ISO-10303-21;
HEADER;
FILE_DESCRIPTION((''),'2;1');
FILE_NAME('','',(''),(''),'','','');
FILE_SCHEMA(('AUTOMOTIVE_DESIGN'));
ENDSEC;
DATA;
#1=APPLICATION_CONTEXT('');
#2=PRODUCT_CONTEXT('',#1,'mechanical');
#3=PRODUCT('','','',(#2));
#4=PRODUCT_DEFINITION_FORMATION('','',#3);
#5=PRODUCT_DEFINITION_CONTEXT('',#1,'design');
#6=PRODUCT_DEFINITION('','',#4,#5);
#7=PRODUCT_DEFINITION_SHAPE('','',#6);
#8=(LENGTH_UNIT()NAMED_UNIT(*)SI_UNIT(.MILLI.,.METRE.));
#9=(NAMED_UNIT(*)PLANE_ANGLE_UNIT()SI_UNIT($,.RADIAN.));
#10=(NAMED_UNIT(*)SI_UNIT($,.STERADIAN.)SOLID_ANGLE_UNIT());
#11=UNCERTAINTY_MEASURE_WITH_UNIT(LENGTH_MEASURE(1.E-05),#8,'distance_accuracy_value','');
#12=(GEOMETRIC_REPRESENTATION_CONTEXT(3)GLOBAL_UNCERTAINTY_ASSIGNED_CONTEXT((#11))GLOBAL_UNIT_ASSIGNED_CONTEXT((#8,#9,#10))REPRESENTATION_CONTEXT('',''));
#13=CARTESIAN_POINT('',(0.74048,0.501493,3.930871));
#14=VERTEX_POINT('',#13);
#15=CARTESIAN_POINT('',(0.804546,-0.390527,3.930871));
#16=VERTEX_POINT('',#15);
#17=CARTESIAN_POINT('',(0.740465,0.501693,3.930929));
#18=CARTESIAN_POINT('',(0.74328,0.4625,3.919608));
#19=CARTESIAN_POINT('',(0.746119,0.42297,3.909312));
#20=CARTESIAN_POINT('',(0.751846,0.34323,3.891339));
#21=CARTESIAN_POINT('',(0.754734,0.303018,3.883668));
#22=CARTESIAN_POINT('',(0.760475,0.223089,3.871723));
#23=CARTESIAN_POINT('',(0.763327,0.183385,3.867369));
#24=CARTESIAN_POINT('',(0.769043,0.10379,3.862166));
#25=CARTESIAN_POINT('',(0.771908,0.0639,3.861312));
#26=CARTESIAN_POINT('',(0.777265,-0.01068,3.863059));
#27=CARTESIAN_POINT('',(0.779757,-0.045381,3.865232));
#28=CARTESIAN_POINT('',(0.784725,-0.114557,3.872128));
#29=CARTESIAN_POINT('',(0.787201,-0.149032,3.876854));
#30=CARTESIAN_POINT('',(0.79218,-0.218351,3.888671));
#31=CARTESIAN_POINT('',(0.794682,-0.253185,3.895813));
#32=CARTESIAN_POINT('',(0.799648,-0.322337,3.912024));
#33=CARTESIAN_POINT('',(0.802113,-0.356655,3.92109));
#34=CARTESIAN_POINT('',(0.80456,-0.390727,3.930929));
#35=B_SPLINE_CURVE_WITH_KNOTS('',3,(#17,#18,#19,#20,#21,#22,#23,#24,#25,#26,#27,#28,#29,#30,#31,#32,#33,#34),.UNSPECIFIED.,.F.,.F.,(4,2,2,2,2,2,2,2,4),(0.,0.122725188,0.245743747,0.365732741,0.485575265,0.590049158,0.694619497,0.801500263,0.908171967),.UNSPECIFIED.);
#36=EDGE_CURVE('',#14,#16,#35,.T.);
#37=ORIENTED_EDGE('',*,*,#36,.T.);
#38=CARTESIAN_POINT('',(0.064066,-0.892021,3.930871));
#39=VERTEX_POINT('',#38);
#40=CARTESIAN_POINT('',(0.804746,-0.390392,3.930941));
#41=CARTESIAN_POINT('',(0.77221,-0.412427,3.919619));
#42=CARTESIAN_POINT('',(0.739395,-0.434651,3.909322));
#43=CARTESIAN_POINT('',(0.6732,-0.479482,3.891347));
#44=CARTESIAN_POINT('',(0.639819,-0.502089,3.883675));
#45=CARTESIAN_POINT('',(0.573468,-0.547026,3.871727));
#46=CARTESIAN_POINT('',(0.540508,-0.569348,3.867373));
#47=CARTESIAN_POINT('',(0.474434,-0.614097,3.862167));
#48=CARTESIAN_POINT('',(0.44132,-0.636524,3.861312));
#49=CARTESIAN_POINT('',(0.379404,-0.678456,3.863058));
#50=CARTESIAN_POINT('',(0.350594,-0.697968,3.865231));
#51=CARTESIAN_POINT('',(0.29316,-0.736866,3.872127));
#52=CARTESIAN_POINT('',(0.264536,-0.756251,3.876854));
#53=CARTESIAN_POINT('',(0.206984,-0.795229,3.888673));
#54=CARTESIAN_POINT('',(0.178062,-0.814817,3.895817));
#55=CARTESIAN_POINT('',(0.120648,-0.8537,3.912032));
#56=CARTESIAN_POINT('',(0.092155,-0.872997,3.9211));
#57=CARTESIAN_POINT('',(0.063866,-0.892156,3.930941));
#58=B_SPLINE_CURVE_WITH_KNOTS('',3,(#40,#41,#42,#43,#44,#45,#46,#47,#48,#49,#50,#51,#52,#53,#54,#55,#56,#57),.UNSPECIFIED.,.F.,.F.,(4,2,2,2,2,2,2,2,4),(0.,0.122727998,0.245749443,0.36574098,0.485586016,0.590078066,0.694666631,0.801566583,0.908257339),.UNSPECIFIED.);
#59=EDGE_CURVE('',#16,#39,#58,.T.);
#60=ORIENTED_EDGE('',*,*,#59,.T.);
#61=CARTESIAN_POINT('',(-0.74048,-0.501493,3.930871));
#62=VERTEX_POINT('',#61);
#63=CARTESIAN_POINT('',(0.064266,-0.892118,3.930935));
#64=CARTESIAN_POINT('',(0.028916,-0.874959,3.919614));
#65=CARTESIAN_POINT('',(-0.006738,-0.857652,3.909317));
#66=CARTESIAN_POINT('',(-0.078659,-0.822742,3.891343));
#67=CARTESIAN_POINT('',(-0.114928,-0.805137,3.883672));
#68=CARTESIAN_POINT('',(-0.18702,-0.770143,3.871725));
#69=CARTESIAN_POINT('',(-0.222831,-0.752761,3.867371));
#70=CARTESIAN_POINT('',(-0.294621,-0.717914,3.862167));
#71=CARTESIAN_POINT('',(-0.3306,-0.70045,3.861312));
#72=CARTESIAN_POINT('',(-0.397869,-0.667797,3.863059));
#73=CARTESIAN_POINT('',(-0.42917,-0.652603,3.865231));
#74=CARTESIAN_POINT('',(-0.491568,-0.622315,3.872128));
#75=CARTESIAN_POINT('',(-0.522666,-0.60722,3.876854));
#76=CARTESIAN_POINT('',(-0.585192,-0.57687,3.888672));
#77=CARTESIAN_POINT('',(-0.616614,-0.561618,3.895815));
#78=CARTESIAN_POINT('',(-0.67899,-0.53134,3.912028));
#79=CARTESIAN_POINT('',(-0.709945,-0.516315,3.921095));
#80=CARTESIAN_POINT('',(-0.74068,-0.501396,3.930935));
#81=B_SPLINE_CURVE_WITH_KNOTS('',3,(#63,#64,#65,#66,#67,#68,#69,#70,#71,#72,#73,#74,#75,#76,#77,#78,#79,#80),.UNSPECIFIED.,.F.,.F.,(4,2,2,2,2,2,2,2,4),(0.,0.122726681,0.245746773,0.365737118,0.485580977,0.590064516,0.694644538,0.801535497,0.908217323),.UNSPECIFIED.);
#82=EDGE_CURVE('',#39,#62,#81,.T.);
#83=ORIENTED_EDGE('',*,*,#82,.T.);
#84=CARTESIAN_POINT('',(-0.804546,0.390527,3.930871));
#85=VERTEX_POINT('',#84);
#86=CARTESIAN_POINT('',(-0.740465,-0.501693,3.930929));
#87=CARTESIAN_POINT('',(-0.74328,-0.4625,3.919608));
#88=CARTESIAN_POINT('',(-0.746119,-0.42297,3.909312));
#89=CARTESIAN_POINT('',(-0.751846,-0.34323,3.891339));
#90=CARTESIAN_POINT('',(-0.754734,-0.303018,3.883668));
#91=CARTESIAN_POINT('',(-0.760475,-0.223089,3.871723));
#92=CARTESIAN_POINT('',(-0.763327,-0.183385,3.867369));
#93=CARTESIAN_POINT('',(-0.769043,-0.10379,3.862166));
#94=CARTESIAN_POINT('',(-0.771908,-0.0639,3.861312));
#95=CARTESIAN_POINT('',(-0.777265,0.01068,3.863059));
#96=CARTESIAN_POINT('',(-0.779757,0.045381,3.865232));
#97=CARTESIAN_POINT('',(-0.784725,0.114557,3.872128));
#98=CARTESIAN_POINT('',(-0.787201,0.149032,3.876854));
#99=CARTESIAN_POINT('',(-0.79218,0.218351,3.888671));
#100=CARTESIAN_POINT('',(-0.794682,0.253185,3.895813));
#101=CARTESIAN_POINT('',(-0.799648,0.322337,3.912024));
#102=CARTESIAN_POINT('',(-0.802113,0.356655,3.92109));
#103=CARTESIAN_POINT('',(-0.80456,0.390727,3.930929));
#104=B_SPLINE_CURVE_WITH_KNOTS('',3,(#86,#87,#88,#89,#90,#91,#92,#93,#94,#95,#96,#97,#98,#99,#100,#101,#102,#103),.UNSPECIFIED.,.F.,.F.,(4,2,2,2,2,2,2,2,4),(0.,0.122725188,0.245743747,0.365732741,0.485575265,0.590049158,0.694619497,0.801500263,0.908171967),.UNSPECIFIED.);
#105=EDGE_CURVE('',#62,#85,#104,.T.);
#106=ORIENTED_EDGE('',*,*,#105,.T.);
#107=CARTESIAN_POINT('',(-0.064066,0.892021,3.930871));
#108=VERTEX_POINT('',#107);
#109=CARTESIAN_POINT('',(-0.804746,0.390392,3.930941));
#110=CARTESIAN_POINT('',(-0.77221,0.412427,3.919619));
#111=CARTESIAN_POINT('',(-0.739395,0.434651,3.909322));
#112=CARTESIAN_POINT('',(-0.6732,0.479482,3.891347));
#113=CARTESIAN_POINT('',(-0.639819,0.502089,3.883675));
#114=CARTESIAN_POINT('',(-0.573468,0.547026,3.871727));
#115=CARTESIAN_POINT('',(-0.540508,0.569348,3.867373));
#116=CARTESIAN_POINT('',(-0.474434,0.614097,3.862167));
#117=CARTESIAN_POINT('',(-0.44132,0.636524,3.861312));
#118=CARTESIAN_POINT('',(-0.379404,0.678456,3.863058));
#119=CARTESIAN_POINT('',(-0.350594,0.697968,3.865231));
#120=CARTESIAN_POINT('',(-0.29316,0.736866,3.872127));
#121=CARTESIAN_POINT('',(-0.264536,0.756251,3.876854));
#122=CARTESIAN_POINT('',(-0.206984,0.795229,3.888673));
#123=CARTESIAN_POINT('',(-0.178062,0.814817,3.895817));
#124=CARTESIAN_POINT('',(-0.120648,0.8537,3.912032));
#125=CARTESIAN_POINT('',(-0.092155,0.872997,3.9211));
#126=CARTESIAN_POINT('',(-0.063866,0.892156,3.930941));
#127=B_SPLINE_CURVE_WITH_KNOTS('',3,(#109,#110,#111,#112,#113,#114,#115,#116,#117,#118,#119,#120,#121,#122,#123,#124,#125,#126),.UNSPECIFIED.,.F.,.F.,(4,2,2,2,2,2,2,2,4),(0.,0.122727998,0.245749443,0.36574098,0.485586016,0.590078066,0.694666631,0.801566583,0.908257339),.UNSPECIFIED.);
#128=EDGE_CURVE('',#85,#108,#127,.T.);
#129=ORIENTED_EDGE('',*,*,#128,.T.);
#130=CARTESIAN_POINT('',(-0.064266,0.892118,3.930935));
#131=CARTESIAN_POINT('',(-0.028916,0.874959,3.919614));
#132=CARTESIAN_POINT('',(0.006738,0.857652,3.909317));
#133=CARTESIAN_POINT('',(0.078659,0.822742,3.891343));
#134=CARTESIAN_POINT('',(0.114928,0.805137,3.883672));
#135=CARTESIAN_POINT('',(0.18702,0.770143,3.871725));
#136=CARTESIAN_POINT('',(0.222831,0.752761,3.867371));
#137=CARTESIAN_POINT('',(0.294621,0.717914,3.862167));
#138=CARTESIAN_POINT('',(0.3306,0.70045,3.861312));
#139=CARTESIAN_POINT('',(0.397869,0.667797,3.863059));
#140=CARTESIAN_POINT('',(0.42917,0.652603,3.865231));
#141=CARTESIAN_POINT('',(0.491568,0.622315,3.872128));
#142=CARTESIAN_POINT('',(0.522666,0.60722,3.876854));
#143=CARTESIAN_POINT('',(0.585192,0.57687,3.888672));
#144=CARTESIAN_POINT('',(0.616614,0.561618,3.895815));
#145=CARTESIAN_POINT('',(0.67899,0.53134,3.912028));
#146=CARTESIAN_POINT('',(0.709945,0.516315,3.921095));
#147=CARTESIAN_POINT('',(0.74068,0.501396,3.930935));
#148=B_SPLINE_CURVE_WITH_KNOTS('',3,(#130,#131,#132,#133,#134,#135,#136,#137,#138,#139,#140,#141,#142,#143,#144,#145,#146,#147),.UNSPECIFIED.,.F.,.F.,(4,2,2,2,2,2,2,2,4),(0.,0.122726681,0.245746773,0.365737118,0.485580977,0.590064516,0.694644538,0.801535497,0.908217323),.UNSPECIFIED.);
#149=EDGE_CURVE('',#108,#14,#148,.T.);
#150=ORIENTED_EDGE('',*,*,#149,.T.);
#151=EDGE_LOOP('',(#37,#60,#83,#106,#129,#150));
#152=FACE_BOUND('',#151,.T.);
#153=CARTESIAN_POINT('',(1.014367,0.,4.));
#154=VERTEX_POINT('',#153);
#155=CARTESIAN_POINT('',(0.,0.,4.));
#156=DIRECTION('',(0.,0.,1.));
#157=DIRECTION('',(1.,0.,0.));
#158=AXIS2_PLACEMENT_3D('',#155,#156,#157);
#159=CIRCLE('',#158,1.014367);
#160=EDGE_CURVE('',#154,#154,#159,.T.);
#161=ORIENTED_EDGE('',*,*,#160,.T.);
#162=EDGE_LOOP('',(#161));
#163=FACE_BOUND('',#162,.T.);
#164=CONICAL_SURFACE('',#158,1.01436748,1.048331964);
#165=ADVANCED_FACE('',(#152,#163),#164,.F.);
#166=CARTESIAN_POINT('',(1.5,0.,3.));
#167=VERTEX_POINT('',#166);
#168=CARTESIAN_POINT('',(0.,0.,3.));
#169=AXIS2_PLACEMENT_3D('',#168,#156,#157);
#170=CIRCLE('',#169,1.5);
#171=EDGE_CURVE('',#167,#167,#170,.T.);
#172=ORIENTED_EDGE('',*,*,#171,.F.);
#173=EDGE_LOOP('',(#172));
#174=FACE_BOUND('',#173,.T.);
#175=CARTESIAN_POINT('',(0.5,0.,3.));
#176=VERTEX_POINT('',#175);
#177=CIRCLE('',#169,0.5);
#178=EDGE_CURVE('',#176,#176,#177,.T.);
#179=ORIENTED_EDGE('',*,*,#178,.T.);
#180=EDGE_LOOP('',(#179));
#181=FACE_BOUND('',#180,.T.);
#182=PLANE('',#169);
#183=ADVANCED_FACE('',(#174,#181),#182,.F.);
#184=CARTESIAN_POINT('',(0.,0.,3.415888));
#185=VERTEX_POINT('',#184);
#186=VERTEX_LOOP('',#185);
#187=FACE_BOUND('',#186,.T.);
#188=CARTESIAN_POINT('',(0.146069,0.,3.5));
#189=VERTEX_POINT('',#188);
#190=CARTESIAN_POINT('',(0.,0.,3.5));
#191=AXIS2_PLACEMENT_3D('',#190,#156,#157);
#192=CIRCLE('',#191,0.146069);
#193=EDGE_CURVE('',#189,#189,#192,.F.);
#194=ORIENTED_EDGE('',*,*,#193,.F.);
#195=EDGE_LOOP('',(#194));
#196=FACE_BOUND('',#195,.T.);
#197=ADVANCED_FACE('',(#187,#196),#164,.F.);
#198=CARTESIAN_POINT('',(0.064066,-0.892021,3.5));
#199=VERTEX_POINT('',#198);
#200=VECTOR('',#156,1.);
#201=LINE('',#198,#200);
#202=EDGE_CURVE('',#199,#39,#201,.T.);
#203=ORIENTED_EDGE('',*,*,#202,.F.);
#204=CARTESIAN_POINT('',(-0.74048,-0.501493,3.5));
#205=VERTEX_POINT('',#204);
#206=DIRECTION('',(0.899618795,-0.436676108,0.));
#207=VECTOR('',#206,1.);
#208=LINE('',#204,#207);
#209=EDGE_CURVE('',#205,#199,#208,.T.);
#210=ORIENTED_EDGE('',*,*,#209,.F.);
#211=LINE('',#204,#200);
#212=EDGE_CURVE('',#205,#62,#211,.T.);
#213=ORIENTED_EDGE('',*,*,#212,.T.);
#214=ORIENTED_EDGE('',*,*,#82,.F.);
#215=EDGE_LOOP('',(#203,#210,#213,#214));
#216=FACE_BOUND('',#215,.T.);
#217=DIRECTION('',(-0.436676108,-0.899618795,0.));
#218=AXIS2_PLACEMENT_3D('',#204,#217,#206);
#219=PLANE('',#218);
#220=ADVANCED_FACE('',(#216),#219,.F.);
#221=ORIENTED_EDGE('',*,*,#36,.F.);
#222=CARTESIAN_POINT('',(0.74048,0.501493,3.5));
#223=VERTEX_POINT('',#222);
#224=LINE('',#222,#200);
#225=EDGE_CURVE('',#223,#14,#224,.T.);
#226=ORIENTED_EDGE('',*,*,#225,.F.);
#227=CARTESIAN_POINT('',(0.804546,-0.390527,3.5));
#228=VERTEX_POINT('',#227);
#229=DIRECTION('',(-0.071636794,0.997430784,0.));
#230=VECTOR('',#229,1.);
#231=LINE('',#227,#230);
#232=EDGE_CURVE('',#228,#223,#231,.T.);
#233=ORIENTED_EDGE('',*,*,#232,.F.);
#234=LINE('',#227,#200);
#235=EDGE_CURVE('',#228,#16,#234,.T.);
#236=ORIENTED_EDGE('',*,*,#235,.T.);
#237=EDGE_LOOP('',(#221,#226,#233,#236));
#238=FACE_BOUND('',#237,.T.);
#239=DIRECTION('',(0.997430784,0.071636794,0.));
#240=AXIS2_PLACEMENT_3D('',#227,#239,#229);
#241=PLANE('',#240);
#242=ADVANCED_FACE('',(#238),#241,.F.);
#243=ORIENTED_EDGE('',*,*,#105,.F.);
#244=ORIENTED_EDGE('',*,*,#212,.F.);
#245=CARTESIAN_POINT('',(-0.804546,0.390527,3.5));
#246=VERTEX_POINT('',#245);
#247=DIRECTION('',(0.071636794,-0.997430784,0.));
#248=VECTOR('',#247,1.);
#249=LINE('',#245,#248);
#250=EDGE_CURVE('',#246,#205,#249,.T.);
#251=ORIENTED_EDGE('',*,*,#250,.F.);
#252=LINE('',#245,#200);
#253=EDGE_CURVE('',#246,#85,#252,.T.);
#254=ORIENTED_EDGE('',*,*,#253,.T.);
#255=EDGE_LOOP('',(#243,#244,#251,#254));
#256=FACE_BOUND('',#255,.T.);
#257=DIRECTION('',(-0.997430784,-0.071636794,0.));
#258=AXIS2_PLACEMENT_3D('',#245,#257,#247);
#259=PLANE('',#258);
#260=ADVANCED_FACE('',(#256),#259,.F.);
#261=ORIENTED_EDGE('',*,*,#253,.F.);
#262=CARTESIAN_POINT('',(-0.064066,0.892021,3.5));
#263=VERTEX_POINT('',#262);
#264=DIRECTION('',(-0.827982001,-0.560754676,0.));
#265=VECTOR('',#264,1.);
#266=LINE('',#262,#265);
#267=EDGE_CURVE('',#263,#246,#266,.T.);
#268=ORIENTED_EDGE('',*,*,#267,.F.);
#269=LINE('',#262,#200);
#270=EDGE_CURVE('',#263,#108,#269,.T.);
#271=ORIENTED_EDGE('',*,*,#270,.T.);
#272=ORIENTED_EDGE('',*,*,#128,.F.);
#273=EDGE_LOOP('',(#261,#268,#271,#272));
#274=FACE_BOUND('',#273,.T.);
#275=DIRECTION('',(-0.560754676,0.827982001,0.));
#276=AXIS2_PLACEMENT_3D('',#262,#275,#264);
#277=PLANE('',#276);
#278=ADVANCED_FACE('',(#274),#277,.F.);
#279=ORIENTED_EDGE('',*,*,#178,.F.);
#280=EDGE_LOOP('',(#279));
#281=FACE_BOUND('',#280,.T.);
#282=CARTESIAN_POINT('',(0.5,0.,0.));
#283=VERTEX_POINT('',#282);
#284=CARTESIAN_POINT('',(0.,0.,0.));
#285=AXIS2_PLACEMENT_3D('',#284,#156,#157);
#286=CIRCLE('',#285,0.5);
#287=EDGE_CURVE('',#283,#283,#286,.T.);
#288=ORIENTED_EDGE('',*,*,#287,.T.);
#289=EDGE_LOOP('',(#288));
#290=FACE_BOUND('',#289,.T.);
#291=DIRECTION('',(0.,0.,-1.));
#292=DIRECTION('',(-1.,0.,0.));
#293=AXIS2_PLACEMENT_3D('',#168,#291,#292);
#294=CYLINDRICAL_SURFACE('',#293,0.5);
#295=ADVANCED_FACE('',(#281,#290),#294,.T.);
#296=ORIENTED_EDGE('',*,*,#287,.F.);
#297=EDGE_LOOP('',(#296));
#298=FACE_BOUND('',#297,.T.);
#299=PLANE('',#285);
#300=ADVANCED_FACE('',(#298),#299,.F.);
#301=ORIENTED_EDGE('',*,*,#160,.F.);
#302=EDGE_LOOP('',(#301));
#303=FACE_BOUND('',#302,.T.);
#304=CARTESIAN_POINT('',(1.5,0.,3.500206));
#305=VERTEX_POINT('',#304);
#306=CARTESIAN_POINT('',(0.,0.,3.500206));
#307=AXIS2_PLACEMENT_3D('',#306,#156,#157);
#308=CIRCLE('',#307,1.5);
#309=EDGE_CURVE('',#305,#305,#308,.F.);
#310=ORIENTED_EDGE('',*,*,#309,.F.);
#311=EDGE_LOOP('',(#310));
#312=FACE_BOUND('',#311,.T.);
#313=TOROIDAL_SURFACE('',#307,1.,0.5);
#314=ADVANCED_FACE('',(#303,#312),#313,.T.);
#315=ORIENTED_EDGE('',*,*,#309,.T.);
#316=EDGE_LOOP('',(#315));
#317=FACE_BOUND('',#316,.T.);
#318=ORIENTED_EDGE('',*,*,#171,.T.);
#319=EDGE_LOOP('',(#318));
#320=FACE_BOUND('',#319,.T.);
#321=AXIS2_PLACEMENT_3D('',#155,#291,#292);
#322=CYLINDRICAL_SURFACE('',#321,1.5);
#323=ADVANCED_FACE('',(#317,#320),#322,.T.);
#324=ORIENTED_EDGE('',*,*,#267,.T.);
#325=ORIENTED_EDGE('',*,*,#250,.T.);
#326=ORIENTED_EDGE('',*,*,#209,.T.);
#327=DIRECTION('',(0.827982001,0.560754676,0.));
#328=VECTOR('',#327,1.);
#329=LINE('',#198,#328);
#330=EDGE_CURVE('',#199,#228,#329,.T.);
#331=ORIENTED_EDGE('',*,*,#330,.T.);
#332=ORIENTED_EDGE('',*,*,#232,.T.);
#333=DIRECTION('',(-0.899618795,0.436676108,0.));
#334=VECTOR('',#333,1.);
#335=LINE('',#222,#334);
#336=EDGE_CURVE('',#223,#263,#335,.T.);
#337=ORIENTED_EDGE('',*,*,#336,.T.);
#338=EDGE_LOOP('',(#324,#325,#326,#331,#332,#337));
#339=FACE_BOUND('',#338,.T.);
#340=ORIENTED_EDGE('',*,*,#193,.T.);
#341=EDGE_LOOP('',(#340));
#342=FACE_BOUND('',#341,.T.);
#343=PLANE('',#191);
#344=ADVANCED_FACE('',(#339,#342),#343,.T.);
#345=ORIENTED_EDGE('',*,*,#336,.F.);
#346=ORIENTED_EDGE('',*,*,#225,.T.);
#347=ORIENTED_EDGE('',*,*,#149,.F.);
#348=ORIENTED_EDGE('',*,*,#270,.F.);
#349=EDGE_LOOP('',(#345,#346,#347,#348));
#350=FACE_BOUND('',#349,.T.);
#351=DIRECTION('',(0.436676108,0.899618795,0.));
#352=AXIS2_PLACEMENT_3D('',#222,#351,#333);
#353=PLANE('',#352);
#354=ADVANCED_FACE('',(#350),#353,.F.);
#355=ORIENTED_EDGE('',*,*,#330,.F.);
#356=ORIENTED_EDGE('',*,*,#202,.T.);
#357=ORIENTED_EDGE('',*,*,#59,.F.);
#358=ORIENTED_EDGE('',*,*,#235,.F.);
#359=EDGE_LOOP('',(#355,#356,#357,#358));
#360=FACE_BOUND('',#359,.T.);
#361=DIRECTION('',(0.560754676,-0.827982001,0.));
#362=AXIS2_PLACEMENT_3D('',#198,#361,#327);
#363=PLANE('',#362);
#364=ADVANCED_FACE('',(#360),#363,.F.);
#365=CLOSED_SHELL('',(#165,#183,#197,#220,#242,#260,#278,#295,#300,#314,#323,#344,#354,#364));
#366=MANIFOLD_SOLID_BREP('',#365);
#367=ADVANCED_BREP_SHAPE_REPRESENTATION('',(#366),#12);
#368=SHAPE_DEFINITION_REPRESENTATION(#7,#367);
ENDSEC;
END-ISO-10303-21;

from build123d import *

# Parameters (mm, degrees)
SKETCH1_R           = 0.5
BOSS_EXTRUDE1_DEPTH = 3
SKETCH2_R           = 1.5
BOSS_EXTRUDE2_DEPTH = 1
CUT_EXTRUDE2_DEPTH  = 0.5
FILLET1_R           = 0.5


with BuildPart() as part:
    # Sketch1 → Boss-Extrude1 (new body)
    with BuildSketch(Plane.XY):
        Circle(SKETCH1_R)
    extrude(amount=BOSS_EXTRUDE1_DEPTH)

    # Sketch2 → Boss-Extrude2 (add)
    with BuildSketch(Plane.XY.offset(3)):
        Circle(SKETCH2_R)
    extrude(amount=BOSS_EXTRUDE2_DEPTH)

    # Sketch3 → Cut-Revolve1 (revolve, cut)
    with BuildSketch(Plane(origin=(0, 0, 0), x_dir=(1, 0, 0), z_dir=(0, 1, 0))):
        Polygon((0, -3.415887941), (1.01436748, -4), (0, -4), align=None)
    revolve(axis=Axis((0, 0, 4), (0, 0, -1)), mode=Mode.SUBTRACT)

    # Sketch4 → Cut-Extrude2 (cut)
    with BuildSketch(Plane.XY.offset(4)):
        Polygon((-0.064066106, 0.892020738), (-0.804545672, 0.390527494), (-0.740479567, -0.501493244), (0.064066106, -0.892020738), (0.804545672, -0.390527494), (0.740479567, 0.501493244), align=None)
    extrude(amount=-CUT_EXTRUDE2_DEPTH, mode=Mode.SUBTRACT)

    # Fillet1
    # the kernel refuses this fillet: 0.5 mm, written as the material it takes off along each edge
    with BuildSketch(Plane(origin=(0, 0, 4), x_dir=(1, 0, 0), z_dir=(0, -1, 0))) as fillet1_piece_1:
        with BuildLine():
            CenterArc((1, -0.499793533), FILLET1_R, 0, 88.353381389)
            Line((1.01436748, 0), (1.01465483, 0.009995871))
            ThreePointArc((1.01465483, 0.009995871), (1.25718374, 0.01), (1.5, 0.01))
            Line((1.5, 0.01), (1.51, 0))
            Line((1.51, 0), (1.51, -0.499793533))
            Line((1.51, -0.499793533), (1.5, -0.499793533))
        make_face()
    revolve(axis=Axis((0, 0, 4), (0, 0, 1)), mode=Mode.SUBTRACT)


solid = part.part
